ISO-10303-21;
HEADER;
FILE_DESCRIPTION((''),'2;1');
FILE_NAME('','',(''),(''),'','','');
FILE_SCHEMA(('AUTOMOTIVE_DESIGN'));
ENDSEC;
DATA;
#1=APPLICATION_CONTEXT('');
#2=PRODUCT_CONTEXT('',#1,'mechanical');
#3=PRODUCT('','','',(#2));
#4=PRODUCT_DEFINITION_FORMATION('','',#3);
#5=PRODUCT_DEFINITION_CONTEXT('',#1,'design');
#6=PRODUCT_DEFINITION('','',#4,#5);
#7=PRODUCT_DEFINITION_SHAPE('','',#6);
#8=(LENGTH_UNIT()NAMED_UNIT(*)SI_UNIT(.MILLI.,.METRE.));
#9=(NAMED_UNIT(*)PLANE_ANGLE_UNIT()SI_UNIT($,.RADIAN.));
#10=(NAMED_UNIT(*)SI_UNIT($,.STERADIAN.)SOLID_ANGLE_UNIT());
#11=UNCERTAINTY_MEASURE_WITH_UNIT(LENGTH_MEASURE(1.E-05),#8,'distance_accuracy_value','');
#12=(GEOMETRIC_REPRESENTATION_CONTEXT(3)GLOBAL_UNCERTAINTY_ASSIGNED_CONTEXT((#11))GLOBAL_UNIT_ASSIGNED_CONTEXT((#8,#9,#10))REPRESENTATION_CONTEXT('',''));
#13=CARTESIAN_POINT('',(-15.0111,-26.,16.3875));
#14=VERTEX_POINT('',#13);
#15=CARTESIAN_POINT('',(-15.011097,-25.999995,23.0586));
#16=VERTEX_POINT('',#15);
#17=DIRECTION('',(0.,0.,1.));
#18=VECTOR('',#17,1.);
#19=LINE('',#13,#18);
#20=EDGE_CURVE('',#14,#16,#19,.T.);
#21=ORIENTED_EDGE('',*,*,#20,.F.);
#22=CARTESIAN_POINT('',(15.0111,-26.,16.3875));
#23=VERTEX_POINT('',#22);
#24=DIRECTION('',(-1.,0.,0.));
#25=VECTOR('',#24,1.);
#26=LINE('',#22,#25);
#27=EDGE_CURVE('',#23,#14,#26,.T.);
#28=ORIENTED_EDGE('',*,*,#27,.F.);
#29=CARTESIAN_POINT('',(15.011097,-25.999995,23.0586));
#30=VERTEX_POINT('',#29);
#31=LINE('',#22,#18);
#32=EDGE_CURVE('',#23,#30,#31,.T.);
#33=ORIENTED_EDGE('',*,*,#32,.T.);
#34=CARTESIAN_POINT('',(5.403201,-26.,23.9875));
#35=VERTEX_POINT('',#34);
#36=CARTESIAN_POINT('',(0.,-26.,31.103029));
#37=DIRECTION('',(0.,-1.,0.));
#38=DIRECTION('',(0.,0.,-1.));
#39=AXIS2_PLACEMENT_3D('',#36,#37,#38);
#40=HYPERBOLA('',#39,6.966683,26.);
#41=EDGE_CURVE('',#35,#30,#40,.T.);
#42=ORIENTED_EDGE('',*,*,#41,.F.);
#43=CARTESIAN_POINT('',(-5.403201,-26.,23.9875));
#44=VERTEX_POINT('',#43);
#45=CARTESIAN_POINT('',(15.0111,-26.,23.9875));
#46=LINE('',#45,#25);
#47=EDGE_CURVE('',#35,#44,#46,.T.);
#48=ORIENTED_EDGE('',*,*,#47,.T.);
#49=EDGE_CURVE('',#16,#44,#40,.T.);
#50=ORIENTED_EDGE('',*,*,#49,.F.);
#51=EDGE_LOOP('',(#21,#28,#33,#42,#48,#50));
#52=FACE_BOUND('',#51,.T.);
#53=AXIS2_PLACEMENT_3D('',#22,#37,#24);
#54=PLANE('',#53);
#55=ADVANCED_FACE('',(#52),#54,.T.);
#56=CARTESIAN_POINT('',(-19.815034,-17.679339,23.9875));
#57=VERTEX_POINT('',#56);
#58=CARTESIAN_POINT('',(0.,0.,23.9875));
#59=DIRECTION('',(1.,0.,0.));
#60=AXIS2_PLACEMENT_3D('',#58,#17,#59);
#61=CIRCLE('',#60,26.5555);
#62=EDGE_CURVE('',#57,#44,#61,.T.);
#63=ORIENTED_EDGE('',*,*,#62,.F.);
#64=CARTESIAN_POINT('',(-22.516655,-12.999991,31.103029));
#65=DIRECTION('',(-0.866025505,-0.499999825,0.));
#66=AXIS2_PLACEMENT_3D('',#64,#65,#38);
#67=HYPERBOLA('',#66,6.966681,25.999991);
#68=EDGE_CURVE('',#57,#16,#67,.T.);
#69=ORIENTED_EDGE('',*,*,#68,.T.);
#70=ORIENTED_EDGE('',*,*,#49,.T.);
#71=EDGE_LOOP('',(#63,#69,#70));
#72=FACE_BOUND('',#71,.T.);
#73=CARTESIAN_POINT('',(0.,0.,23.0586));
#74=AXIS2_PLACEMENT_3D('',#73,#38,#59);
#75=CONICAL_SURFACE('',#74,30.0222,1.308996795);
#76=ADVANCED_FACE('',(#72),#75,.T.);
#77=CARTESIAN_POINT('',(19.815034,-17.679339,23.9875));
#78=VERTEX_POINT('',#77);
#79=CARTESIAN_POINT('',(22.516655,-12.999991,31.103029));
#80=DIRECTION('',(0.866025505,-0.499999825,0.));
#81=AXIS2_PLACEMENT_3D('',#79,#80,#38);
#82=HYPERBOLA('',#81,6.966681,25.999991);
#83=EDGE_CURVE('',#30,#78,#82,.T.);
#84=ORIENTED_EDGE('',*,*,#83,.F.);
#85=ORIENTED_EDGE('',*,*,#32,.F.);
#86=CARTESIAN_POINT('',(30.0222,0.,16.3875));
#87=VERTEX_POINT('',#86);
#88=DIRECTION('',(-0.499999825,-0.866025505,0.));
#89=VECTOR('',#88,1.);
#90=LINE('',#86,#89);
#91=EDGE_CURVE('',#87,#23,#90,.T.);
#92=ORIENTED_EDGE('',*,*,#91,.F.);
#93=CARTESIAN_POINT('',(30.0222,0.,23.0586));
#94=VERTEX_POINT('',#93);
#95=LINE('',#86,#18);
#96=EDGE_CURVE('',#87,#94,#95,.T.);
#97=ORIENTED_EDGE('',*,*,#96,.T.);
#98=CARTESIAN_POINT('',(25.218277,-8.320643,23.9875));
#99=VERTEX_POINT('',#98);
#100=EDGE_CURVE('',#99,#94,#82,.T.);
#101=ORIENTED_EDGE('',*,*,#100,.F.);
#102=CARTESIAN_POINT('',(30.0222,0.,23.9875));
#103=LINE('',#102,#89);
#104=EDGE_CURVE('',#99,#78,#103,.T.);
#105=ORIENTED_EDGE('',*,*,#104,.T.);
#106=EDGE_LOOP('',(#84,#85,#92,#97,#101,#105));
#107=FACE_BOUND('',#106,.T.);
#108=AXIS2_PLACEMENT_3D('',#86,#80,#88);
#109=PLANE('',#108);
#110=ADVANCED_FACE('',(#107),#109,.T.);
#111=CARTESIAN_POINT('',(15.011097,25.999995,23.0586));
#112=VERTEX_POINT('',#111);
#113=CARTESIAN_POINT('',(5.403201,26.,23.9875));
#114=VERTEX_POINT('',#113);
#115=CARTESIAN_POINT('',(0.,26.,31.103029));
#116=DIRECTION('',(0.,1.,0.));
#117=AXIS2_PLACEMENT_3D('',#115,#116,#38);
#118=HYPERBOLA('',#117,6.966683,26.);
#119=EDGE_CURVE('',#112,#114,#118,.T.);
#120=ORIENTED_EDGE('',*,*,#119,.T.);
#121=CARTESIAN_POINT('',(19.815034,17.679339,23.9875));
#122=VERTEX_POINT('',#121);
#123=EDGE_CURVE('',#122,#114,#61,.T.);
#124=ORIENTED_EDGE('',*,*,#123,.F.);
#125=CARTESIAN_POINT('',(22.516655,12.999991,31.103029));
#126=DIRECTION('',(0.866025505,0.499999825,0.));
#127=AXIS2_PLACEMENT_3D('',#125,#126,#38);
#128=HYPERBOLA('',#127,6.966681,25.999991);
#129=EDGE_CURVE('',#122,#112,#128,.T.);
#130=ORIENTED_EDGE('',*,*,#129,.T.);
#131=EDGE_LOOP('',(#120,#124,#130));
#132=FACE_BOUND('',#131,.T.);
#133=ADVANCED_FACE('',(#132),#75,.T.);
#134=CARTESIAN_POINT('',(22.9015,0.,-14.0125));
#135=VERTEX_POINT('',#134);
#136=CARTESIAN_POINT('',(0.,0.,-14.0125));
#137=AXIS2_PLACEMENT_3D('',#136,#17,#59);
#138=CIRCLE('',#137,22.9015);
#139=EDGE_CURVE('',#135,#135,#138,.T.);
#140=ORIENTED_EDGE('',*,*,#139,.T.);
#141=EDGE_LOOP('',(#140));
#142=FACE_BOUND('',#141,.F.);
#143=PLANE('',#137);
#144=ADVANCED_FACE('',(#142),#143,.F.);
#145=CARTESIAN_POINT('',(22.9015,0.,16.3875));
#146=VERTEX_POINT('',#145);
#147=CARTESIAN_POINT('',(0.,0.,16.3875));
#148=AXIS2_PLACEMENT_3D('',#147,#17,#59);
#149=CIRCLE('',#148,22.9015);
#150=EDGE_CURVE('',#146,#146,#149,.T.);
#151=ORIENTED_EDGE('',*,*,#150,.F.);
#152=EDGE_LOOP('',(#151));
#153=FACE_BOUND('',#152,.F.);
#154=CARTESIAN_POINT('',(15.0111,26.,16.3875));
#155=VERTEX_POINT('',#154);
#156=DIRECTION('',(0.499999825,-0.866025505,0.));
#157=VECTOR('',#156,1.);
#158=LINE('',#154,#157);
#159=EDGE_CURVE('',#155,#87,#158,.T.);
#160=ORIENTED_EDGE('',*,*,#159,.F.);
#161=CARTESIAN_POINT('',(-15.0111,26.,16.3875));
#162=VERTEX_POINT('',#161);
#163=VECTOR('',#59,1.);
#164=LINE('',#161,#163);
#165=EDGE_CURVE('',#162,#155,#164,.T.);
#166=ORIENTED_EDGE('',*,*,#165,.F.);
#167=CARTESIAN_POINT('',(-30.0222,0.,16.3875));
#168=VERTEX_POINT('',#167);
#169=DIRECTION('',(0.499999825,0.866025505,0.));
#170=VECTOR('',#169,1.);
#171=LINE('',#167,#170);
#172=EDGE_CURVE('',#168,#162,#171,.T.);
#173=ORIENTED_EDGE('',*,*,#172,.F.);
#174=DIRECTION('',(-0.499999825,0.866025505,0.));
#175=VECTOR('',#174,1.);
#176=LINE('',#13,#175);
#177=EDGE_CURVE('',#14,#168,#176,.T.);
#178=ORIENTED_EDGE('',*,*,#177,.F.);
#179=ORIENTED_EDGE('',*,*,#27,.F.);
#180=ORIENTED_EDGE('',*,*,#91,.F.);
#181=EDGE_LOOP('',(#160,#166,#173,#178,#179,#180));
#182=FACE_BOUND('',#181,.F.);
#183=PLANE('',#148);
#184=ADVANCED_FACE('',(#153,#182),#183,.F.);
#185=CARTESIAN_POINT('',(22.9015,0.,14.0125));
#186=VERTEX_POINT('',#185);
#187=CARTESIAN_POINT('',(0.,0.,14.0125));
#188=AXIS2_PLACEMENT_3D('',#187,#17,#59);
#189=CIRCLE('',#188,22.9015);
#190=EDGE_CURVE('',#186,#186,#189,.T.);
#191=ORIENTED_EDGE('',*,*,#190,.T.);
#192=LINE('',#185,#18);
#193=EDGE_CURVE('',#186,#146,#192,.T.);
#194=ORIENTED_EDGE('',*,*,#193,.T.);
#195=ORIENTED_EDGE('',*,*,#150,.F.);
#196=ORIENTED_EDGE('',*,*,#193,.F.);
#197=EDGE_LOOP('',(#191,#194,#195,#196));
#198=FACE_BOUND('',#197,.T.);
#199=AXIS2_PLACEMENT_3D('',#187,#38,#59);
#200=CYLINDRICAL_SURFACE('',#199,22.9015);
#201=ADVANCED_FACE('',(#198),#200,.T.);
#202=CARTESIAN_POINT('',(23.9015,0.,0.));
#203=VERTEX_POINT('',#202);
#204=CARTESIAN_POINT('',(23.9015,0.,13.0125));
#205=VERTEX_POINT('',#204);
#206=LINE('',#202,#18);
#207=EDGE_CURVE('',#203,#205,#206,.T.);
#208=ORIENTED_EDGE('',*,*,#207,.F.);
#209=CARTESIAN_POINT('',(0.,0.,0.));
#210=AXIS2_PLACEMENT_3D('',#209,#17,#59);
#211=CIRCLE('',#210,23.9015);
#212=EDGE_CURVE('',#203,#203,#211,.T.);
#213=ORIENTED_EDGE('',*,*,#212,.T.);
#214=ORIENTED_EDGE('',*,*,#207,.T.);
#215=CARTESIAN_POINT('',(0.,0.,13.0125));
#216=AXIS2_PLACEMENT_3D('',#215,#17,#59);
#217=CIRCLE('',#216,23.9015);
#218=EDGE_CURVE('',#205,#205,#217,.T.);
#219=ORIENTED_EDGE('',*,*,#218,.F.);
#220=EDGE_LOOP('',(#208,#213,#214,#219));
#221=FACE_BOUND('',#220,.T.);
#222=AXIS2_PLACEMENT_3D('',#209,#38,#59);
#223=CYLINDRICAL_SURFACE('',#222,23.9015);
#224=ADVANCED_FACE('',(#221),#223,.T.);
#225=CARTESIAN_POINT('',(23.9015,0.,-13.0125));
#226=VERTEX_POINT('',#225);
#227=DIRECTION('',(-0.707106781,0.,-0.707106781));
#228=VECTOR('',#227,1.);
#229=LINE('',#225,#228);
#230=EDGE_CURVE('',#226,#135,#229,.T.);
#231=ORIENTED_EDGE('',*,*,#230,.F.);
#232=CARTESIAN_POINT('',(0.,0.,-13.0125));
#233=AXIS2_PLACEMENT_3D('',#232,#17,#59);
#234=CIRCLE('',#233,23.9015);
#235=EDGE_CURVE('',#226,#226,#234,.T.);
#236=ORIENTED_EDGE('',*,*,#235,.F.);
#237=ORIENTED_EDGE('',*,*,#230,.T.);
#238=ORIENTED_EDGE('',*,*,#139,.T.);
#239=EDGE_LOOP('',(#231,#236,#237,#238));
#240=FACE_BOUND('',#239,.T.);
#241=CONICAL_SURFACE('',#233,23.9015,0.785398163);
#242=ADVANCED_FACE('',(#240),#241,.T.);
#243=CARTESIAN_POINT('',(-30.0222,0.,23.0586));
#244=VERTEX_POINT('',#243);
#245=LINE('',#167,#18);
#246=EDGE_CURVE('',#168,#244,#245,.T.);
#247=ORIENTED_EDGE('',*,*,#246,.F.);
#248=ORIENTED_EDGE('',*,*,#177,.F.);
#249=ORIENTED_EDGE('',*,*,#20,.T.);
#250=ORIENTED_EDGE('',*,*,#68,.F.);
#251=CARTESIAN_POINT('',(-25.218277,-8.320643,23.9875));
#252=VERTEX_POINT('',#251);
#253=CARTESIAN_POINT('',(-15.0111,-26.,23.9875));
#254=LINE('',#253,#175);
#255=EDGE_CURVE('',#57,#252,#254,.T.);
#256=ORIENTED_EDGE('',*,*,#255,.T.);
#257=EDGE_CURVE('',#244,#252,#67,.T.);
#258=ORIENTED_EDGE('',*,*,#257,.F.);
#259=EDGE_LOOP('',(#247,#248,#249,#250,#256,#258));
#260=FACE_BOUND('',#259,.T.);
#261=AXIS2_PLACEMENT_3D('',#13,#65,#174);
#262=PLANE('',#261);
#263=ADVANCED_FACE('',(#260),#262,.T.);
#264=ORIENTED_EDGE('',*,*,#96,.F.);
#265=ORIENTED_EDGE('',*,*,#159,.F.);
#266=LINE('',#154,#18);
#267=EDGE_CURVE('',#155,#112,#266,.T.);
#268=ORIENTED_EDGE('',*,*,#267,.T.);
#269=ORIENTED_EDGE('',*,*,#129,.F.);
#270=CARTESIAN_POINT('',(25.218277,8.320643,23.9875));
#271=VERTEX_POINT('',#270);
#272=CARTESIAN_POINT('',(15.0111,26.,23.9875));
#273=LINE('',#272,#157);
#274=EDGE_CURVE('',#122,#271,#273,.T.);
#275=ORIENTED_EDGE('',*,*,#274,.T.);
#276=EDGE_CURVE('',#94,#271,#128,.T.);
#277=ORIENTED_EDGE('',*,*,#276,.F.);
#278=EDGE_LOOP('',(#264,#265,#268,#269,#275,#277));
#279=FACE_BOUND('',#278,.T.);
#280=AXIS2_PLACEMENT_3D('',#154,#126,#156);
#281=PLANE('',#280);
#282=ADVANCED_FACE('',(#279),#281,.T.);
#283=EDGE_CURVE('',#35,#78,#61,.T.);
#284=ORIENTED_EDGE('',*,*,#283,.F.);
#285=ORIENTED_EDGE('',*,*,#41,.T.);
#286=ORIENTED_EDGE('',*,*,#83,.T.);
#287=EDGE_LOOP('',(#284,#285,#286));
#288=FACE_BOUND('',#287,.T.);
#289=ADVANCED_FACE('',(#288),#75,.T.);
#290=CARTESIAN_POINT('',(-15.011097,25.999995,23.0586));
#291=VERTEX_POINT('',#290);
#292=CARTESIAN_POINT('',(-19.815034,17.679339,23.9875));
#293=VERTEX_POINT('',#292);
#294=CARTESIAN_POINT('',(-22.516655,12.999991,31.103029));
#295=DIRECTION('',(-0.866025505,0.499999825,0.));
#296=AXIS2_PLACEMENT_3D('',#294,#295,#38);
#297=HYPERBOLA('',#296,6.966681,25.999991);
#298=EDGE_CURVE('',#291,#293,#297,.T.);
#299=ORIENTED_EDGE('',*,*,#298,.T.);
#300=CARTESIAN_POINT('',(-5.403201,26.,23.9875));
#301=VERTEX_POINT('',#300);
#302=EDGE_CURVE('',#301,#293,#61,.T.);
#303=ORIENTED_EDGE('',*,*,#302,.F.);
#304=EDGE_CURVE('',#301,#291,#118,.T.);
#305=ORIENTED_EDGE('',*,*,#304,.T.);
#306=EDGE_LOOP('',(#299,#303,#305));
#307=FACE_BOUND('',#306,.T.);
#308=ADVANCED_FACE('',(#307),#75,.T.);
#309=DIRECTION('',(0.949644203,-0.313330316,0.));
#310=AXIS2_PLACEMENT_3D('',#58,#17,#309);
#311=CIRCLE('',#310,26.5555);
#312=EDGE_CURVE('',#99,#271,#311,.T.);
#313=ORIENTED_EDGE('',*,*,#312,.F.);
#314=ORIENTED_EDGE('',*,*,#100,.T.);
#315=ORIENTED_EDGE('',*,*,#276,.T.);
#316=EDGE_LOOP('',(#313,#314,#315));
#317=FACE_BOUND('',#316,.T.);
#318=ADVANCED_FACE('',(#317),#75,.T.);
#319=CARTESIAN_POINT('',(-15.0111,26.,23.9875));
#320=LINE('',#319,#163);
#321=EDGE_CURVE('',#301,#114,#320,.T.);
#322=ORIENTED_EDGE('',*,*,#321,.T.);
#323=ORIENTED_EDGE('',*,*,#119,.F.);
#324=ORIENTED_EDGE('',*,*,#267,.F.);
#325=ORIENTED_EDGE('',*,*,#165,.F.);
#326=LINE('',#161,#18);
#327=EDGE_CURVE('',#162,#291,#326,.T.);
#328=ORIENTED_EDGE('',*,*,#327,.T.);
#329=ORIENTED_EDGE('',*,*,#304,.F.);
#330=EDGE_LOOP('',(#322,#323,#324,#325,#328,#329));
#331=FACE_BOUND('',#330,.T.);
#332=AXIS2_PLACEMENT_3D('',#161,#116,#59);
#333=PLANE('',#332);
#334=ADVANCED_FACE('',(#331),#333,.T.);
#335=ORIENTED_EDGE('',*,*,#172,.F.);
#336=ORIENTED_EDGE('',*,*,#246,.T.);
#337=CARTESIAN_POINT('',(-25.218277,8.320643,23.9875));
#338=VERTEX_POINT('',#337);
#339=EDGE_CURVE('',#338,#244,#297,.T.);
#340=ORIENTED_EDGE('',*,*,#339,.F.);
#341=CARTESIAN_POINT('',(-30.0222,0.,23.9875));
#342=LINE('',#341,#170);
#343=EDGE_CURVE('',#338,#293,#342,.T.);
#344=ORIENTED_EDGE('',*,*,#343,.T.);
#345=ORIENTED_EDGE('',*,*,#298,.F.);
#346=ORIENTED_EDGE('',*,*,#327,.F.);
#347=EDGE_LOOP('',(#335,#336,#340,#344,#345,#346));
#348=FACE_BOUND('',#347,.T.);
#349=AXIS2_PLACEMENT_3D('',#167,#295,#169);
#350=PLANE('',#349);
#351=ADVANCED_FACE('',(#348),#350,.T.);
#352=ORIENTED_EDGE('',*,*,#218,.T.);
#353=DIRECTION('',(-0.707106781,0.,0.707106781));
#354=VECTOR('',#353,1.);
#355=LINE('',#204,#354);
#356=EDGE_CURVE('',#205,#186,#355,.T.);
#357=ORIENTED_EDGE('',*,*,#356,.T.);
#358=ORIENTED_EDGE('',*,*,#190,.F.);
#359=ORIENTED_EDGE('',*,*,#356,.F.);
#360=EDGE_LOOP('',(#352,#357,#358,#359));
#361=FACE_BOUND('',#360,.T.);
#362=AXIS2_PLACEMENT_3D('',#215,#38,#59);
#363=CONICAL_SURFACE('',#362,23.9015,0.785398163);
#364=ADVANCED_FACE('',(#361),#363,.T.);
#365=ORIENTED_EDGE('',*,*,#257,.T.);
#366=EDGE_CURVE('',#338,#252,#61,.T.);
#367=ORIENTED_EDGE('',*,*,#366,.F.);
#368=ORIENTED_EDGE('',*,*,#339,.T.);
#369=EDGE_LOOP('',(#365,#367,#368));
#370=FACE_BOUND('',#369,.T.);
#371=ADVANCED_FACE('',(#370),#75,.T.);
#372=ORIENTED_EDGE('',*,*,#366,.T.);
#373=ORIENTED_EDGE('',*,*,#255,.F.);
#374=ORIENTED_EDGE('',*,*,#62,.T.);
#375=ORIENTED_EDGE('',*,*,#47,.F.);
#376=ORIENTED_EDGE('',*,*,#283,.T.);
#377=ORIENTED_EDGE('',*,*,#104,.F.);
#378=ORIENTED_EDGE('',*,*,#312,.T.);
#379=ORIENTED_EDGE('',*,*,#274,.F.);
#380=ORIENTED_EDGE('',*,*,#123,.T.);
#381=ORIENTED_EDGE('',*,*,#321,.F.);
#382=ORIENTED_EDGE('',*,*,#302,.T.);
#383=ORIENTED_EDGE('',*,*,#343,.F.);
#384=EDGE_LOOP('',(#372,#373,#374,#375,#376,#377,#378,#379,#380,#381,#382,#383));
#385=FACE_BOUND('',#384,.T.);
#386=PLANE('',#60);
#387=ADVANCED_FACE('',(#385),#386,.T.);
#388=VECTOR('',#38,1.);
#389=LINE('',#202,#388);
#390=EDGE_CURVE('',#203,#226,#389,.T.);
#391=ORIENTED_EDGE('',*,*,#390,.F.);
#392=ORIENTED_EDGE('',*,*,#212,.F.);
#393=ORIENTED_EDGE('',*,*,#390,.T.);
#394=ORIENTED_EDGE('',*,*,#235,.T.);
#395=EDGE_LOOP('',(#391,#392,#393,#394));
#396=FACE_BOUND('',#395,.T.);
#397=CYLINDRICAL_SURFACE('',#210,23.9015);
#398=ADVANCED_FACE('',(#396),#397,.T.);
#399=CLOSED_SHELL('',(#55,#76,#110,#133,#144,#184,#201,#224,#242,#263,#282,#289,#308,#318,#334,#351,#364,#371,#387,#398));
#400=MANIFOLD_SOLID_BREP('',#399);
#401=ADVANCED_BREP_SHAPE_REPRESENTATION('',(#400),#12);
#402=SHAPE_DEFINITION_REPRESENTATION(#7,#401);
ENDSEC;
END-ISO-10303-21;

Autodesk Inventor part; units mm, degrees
ref_plane "YZ Plane" through (0, 0, 0) normal (1, 0, 0) x (0, 1, 0)
ref_plane "XZ Plane" through (0, 0, 0) normal (0, 1, 0) x (-1, 0, 0)
ref_plane "XY Plane" through (0, 0, 0) normal (0, 0, 1) x (1, 0, 0)
sketch "Szkic7" plane through (0, 0, 0) normal (0, 0, 1) x (1, 0, 0)
  circle A0 centre (0, 0) radius 23.9015
  dimension "d35" = 47.803
extrude "Wyciągnięcie proste2" add sketch "Szkic7" along normal mid plane 28.025
chamfer "Faza2" distance 1 angle 45 1 edges at (-23.9015, 0, 14.0125)
sketch "Szkic9" plane through (0, 0, 14.0125) normal (0, 0, 1) x (1, 0, 0)
  circle A0 centre (0, 0) radius 22.9015 projected
extrude "Wyciągnięcie proste3" add sketch "Szkic9" along normal blind 2.375
sketch "Szkic10" plane through (0, 0, 16.3875) normal (0, 0, 1) x (1, 0, 0)
  line L0 (-15.0111, 26) -> (15.0111, 26)
  line L1 (15.0111, 26) -> (30.0222, 0)
  line L2 (30.0222, 0) -> (15.0111, -26)
  line L3 (15.0111, -26) -> (-15.0111, -26)
  line L4 (-15.0111, -26) -> (-30.0222, 0)
  line L5 (-30.0222, 0) -> (-15.0111, 26)
  line L6 (0, 33.4621) -> (0, -33.4621) construction
  line L7 (-33.4621, 0) -> (33.4621, 0) construction
  point P0 (0, 0)
  point P1 (0, 0)
  point P2 (0, 26)
  dimension "d44" = 52
extrude "Wyciągnięcie proste4" add sketch "Szkic10" along normal blind 7.6
sketch "Szkic12" plane through (0, 0, 0) normal (0, 1, 0) x (-1, 0, 0)
  line L0 (0, -2.1463) -> (0, 12.8775) construction
  line L1 (-15.0111, 16.3875) -> (-15.0111, 23.9875) construction
  line L2 (-30.0222, 23.9875) -> (-15.0111, 23.9875) construction
  line L3 (-30.0222, 16.3875) -> (-30.0222, 23.9875) projected
  line L4 (-30.0222, 23.0586) -> (-26.5555, 23.9875)
  line L5 (-30.0222, 23.9875) -> (-15.0111, 23.9875) projected
  line L6 (-30.0222, 16.3875) -> (-15.0111, 16.3875) projected
  point P0 (0, 0)
  dimension "d50" = 15
  dimension "d51" = 3.4667
revolve "Obrót2" cut sketch "Szkic12" angle 360 about axis through (0, 0, -10) along (0, 0, 1)
thread "Gwint3" size "G47.803x2.309" designation "G 1 1/2" class "A" standard "ISO Pipe Threads" full length
chamfer "Faza3" distance 1 angle 45 1 edges at (-23.9015, 0, -14.0125)
equation "\"d35\" = OD"
equation "\"d36\" = 0.7375 * L"
equation "\"d42\" = 0.0625 * L"
equation "\"d44\" = SW"
equation "\"d45\" = 0.2 * L"
equation "\"d51\" = 0.0666667 * SW"
equation "\"SzerokośćGięciaPodcięcia\" = Grubość"
equation "\"RozmiarPodcięciaNarożnika\" = 4 * Grubość"
equation "\"PromieńPrzejścia\" = PromieńGięcia"
equation "\"Rozmiar_promienia_Jacobiego\" = PromieńGięcia"
equation "\"Wielk_odstępu\" = Grubość"
equation "\"d2\" = PromieńGięcia"
equation "\"d23\" = PromieńGięcia"
equation "\"OD\" = 47.803"
equation "\"SW\" = 52"
equation "\"L\" = 38"
equation "\"Grubość\" = 1.5"
equation "\"PromieńGięcia\" = 3"
properties part number "Korek sześciokątny BSP 1 1/2'' L=38" material "304"
